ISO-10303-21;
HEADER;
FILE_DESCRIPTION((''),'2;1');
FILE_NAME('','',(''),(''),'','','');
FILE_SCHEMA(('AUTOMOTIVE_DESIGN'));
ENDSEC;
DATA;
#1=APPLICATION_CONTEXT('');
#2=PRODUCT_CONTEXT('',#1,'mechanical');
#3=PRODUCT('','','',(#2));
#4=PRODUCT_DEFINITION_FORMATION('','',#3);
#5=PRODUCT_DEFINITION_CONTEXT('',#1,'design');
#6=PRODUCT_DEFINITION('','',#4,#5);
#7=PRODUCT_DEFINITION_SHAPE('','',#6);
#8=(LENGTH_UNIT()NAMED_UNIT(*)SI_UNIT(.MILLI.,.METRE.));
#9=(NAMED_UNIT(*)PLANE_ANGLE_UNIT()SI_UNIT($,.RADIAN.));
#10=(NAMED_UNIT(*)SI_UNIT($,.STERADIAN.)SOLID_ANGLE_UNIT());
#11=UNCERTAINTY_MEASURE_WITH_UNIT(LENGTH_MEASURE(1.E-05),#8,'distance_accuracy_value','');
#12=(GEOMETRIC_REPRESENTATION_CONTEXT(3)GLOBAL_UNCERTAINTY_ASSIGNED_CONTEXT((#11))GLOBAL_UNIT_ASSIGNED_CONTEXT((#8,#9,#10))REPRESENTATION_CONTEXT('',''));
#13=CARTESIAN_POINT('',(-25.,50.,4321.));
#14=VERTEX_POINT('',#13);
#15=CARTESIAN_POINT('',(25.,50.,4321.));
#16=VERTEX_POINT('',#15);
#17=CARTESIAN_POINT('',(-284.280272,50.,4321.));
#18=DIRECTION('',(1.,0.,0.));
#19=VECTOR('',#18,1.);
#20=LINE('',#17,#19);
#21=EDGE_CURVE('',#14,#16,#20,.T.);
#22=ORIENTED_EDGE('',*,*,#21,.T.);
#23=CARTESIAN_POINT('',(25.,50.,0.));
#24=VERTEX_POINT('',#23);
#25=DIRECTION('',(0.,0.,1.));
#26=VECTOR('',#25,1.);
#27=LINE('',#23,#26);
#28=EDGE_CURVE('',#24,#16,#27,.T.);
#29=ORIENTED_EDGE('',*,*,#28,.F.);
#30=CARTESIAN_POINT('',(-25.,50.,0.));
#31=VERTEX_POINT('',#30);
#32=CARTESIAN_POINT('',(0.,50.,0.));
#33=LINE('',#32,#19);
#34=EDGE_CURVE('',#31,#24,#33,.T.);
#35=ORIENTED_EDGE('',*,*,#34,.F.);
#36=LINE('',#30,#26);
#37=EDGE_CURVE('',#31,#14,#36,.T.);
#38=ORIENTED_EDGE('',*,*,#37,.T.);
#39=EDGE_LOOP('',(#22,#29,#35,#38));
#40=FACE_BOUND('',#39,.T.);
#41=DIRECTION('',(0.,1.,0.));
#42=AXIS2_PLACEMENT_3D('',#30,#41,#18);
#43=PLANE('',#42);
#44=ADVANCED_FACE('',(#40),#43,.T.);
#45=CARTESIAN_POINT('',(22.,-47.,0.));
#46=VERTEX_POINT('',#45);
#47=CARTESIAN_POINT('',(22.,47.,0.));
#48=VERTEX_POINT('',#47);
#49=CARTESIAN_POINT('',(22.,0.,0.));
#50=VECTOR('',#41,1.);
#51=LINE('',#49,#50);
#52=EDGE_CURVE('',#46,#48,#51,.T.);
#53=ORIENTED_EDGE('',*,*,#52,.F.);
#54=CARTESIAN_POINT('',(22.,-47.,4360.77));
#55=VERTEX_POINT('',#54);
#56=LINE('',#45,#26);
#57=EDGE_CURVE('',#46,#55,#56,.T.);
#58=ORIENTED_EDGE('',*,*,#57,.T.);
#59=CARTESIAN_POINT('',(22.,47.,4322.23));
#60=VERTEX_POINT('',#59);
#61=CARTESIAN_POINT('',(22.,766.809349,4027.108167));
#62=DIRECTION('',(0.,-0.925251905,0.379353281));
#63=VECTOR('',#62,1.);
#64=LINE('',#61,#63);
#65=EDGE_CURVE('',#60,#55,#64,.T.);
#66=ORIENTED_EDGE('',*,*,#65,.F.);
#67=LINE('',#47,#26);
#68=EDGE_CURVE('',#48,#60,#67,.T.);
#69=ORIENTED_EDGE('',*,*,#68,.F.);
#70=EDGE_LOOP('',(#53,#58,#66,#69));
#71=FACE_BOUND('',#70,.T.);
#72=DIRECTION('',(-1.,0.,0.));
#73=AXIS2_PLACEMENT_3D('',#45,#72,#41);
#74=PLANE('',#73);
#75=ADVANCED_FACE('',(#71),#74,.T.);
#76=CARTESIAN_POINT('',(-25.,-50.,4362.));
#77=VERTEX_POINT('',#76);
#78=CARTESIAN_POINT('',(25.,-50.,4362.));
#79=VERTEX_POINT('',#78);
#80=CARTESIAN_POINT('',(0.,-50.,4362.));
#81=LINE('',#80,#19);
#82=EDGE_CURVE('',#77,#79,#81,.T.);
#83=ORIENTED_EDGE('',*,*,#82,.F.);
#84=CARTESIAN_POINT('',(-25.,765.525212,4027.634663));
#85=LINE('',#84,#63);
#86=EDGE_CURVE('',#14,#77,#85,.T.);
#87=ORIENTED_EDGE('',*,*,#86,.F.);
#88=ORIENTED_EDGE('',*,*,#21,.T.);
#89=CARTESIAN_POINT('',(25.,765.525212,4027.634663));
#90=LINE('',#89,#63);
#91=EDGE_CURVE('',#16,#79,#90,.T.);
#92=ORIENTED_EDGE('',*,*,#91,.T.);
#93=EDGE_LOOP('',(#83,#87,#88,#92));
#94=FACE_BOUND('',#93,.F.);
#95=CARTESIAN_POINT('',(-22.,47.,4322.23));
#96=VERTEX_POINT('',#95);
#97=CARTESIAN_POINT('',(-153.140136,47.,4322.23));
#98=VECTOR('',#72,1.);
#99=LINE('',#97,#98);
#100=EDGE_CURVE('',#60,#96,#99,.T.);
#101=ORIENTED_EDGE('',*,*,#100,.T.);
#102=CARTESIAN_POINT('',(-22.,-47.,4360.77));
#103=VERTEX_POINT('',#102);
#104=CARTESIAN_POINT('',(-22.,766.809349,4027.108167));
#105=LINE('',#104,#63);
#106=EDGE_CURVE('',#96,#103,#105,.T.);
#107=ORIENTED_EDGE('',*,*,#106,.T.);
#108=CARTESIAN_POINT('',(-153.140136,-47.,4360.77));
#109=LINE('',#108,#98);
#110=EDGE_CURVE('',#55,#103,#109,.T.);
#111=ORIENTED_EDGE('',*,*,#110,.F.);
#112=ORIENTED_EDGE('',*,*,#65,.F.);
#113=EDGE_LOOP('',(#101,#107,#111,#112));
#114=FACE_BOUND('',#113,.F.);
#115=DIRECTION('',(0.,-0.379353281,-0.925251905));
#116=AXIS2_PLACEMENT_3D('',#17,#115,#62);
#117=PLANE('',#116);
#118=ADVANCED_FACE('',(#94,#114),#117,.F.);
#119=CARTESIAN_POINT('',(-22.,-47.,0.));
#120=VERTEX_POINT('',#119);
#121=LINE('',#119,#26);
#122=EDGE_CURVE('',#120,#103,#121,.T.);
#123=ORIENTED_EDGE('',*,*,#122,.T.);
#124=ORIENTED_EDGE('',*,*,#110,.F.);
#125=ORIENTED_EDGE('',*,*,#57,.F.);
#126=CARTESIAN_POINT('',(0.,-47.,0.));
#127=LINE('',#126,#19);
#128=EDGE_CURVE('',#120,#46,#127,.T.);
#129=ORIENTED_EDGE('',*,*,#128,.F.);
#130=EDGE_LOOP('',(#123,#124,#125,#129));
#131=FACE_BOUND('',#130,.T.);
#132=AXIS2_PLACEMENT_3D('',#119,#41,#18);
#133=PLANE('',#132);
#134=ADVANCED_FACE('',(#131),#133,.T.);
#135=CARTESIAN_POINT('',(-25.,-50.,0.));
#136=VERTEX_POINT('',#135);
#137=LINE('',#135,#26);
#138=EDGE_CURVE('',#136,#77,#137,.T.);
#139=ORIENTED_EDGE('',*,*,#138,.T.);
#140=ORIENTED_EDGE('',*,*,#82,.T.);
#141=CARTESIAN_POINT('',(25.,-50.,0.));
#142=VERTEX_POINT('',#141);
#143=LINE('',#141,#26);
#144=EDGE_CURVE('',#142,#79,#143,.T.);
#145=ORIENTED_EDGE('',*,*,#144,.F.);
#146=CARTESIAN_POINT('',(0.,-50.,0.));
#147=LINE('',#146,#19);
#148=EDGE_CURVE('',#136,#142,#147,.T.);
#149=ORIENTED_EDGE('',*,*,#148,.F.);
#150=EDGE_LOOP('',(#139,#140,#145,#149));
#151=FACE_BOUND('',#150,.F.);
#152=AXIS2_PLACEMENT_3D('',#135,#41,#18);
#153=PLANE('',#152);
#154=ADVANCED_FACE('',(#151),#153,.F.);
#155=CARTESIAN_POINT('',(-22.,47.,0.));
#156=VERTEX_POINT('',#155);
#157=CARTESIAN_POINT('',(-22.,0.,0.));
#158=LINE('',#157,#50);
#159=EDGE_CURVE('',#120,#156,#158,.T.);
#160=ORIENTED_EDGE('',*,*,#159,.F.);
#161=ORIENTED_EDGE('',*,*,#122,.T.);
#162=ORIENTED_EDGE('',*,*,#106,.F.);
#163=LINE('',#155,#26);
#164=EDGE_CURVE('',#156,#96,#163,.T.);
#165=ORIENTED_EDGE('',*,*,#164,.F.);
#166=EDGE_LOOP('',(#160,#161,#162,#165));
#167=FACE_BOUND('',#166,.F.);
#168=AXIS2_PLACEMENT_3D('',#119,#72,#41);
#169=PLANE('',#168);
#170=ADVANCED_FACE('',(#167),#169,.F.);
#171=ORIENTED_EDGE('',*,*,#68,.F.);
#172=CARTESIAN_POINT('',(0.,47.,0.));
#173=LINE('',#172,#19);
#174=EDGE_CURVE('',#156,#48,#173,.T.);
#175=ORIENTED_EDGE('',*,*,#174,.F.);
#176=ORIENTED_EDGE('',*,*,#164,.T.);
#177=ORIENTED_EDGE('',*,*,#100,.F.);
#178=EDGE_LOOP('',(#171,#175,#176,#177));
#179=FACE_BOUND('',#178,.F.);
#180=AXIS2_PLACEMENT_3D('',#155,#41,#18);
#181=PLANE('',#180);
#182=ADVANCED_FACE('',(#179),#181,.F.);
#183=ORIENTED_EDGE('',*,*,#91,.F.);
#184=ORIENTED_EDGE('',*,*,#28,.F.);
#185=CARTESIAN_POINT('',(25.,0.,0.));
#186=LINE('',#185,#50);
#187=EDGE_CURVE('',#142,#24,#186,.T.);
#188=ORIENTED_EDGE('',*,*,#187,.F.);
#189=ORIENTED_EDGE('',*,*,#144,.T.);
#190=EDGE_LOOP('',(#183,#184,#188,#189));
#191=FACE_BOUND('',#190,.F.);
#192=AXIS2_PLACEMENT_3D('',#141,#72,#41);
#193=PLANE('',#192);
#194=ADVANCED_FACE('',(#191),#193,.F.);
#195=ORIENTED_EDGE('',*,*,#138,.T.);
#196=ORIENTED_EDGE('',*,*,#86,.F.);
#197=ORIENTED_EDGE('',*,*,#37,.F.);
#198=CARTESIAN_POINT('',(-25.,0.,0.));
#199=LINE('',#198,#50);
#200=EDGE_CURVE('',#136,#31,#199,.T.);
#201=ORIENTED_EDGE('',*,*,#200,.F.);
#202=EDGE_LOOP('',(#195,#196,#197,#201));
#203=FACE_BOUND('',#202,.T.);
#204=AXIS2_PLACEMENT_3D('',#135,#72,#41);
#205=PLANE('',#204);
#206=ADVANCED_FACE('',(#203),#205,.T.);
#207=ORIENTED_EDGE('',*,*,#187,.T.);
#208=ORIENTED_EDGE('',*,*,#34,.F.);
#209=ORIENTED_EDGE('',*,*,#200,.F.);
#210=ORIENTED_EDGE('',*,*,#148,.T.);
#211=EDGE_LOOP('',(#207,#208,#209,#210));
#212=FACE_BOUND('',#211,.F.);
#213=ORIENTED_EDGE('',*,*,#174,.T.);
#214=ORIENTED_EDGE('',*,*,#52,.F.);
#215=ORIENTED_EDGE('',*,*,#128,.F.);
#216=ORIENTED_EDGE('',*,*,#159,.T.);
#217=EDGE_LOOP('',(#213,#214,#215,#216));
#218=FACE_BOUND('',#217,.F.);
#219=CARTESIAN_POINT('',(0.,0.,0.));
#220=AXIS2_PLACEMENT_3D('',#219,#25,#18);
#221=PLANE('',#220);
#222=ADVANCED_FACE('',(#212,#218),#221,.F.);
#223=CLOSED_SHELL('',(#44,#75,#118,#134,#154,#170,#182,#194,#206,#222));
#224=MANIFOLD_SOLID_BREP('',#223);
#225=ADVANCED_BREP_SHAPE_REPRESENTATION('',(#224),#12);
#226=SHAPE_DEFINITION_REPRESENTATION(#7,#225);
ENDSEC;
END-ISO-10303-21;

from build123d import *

# Parameters (mm, degrees)
F0_W        = 50
F0_H        = 100
F0_W_2      = 44
F0_H_2      = 94
F1_DEPTH    = 4362
F2_T1_DEPTH = 568.5605442995


# Not quite as in the source:
# - a fillet or chamfer that OpenCascade refuses, or shapes differently, is made with other operations: its cross-section is extruded or revolved along the edge and cut away or added


with BuildPart() as f1:
    # F0 (on Top) → F1 (new body)
    with BuildSketch(Plane.XY):
        Rectangle(F0_W, F0_H)
        Rectangle(F0_W_2, F0_H_2, mode=Mode.SUBTRACT)
    extrude(amount=F1_DEPTH)

    # F2: chamfer of 100 x 41 on 1 edges, made by hand

    # F2_s2 → F2_t1 (cut)
    with BuildSketch(Plane.YZ.offset(-284.2802721497)):
        Polygon((50, 4321), (-50, 4362), (50, 4362), align=None)
    extrude(amount=F2_T1_DEPTH, mode=Mode.SUBTRACT)


solid = f1.part
